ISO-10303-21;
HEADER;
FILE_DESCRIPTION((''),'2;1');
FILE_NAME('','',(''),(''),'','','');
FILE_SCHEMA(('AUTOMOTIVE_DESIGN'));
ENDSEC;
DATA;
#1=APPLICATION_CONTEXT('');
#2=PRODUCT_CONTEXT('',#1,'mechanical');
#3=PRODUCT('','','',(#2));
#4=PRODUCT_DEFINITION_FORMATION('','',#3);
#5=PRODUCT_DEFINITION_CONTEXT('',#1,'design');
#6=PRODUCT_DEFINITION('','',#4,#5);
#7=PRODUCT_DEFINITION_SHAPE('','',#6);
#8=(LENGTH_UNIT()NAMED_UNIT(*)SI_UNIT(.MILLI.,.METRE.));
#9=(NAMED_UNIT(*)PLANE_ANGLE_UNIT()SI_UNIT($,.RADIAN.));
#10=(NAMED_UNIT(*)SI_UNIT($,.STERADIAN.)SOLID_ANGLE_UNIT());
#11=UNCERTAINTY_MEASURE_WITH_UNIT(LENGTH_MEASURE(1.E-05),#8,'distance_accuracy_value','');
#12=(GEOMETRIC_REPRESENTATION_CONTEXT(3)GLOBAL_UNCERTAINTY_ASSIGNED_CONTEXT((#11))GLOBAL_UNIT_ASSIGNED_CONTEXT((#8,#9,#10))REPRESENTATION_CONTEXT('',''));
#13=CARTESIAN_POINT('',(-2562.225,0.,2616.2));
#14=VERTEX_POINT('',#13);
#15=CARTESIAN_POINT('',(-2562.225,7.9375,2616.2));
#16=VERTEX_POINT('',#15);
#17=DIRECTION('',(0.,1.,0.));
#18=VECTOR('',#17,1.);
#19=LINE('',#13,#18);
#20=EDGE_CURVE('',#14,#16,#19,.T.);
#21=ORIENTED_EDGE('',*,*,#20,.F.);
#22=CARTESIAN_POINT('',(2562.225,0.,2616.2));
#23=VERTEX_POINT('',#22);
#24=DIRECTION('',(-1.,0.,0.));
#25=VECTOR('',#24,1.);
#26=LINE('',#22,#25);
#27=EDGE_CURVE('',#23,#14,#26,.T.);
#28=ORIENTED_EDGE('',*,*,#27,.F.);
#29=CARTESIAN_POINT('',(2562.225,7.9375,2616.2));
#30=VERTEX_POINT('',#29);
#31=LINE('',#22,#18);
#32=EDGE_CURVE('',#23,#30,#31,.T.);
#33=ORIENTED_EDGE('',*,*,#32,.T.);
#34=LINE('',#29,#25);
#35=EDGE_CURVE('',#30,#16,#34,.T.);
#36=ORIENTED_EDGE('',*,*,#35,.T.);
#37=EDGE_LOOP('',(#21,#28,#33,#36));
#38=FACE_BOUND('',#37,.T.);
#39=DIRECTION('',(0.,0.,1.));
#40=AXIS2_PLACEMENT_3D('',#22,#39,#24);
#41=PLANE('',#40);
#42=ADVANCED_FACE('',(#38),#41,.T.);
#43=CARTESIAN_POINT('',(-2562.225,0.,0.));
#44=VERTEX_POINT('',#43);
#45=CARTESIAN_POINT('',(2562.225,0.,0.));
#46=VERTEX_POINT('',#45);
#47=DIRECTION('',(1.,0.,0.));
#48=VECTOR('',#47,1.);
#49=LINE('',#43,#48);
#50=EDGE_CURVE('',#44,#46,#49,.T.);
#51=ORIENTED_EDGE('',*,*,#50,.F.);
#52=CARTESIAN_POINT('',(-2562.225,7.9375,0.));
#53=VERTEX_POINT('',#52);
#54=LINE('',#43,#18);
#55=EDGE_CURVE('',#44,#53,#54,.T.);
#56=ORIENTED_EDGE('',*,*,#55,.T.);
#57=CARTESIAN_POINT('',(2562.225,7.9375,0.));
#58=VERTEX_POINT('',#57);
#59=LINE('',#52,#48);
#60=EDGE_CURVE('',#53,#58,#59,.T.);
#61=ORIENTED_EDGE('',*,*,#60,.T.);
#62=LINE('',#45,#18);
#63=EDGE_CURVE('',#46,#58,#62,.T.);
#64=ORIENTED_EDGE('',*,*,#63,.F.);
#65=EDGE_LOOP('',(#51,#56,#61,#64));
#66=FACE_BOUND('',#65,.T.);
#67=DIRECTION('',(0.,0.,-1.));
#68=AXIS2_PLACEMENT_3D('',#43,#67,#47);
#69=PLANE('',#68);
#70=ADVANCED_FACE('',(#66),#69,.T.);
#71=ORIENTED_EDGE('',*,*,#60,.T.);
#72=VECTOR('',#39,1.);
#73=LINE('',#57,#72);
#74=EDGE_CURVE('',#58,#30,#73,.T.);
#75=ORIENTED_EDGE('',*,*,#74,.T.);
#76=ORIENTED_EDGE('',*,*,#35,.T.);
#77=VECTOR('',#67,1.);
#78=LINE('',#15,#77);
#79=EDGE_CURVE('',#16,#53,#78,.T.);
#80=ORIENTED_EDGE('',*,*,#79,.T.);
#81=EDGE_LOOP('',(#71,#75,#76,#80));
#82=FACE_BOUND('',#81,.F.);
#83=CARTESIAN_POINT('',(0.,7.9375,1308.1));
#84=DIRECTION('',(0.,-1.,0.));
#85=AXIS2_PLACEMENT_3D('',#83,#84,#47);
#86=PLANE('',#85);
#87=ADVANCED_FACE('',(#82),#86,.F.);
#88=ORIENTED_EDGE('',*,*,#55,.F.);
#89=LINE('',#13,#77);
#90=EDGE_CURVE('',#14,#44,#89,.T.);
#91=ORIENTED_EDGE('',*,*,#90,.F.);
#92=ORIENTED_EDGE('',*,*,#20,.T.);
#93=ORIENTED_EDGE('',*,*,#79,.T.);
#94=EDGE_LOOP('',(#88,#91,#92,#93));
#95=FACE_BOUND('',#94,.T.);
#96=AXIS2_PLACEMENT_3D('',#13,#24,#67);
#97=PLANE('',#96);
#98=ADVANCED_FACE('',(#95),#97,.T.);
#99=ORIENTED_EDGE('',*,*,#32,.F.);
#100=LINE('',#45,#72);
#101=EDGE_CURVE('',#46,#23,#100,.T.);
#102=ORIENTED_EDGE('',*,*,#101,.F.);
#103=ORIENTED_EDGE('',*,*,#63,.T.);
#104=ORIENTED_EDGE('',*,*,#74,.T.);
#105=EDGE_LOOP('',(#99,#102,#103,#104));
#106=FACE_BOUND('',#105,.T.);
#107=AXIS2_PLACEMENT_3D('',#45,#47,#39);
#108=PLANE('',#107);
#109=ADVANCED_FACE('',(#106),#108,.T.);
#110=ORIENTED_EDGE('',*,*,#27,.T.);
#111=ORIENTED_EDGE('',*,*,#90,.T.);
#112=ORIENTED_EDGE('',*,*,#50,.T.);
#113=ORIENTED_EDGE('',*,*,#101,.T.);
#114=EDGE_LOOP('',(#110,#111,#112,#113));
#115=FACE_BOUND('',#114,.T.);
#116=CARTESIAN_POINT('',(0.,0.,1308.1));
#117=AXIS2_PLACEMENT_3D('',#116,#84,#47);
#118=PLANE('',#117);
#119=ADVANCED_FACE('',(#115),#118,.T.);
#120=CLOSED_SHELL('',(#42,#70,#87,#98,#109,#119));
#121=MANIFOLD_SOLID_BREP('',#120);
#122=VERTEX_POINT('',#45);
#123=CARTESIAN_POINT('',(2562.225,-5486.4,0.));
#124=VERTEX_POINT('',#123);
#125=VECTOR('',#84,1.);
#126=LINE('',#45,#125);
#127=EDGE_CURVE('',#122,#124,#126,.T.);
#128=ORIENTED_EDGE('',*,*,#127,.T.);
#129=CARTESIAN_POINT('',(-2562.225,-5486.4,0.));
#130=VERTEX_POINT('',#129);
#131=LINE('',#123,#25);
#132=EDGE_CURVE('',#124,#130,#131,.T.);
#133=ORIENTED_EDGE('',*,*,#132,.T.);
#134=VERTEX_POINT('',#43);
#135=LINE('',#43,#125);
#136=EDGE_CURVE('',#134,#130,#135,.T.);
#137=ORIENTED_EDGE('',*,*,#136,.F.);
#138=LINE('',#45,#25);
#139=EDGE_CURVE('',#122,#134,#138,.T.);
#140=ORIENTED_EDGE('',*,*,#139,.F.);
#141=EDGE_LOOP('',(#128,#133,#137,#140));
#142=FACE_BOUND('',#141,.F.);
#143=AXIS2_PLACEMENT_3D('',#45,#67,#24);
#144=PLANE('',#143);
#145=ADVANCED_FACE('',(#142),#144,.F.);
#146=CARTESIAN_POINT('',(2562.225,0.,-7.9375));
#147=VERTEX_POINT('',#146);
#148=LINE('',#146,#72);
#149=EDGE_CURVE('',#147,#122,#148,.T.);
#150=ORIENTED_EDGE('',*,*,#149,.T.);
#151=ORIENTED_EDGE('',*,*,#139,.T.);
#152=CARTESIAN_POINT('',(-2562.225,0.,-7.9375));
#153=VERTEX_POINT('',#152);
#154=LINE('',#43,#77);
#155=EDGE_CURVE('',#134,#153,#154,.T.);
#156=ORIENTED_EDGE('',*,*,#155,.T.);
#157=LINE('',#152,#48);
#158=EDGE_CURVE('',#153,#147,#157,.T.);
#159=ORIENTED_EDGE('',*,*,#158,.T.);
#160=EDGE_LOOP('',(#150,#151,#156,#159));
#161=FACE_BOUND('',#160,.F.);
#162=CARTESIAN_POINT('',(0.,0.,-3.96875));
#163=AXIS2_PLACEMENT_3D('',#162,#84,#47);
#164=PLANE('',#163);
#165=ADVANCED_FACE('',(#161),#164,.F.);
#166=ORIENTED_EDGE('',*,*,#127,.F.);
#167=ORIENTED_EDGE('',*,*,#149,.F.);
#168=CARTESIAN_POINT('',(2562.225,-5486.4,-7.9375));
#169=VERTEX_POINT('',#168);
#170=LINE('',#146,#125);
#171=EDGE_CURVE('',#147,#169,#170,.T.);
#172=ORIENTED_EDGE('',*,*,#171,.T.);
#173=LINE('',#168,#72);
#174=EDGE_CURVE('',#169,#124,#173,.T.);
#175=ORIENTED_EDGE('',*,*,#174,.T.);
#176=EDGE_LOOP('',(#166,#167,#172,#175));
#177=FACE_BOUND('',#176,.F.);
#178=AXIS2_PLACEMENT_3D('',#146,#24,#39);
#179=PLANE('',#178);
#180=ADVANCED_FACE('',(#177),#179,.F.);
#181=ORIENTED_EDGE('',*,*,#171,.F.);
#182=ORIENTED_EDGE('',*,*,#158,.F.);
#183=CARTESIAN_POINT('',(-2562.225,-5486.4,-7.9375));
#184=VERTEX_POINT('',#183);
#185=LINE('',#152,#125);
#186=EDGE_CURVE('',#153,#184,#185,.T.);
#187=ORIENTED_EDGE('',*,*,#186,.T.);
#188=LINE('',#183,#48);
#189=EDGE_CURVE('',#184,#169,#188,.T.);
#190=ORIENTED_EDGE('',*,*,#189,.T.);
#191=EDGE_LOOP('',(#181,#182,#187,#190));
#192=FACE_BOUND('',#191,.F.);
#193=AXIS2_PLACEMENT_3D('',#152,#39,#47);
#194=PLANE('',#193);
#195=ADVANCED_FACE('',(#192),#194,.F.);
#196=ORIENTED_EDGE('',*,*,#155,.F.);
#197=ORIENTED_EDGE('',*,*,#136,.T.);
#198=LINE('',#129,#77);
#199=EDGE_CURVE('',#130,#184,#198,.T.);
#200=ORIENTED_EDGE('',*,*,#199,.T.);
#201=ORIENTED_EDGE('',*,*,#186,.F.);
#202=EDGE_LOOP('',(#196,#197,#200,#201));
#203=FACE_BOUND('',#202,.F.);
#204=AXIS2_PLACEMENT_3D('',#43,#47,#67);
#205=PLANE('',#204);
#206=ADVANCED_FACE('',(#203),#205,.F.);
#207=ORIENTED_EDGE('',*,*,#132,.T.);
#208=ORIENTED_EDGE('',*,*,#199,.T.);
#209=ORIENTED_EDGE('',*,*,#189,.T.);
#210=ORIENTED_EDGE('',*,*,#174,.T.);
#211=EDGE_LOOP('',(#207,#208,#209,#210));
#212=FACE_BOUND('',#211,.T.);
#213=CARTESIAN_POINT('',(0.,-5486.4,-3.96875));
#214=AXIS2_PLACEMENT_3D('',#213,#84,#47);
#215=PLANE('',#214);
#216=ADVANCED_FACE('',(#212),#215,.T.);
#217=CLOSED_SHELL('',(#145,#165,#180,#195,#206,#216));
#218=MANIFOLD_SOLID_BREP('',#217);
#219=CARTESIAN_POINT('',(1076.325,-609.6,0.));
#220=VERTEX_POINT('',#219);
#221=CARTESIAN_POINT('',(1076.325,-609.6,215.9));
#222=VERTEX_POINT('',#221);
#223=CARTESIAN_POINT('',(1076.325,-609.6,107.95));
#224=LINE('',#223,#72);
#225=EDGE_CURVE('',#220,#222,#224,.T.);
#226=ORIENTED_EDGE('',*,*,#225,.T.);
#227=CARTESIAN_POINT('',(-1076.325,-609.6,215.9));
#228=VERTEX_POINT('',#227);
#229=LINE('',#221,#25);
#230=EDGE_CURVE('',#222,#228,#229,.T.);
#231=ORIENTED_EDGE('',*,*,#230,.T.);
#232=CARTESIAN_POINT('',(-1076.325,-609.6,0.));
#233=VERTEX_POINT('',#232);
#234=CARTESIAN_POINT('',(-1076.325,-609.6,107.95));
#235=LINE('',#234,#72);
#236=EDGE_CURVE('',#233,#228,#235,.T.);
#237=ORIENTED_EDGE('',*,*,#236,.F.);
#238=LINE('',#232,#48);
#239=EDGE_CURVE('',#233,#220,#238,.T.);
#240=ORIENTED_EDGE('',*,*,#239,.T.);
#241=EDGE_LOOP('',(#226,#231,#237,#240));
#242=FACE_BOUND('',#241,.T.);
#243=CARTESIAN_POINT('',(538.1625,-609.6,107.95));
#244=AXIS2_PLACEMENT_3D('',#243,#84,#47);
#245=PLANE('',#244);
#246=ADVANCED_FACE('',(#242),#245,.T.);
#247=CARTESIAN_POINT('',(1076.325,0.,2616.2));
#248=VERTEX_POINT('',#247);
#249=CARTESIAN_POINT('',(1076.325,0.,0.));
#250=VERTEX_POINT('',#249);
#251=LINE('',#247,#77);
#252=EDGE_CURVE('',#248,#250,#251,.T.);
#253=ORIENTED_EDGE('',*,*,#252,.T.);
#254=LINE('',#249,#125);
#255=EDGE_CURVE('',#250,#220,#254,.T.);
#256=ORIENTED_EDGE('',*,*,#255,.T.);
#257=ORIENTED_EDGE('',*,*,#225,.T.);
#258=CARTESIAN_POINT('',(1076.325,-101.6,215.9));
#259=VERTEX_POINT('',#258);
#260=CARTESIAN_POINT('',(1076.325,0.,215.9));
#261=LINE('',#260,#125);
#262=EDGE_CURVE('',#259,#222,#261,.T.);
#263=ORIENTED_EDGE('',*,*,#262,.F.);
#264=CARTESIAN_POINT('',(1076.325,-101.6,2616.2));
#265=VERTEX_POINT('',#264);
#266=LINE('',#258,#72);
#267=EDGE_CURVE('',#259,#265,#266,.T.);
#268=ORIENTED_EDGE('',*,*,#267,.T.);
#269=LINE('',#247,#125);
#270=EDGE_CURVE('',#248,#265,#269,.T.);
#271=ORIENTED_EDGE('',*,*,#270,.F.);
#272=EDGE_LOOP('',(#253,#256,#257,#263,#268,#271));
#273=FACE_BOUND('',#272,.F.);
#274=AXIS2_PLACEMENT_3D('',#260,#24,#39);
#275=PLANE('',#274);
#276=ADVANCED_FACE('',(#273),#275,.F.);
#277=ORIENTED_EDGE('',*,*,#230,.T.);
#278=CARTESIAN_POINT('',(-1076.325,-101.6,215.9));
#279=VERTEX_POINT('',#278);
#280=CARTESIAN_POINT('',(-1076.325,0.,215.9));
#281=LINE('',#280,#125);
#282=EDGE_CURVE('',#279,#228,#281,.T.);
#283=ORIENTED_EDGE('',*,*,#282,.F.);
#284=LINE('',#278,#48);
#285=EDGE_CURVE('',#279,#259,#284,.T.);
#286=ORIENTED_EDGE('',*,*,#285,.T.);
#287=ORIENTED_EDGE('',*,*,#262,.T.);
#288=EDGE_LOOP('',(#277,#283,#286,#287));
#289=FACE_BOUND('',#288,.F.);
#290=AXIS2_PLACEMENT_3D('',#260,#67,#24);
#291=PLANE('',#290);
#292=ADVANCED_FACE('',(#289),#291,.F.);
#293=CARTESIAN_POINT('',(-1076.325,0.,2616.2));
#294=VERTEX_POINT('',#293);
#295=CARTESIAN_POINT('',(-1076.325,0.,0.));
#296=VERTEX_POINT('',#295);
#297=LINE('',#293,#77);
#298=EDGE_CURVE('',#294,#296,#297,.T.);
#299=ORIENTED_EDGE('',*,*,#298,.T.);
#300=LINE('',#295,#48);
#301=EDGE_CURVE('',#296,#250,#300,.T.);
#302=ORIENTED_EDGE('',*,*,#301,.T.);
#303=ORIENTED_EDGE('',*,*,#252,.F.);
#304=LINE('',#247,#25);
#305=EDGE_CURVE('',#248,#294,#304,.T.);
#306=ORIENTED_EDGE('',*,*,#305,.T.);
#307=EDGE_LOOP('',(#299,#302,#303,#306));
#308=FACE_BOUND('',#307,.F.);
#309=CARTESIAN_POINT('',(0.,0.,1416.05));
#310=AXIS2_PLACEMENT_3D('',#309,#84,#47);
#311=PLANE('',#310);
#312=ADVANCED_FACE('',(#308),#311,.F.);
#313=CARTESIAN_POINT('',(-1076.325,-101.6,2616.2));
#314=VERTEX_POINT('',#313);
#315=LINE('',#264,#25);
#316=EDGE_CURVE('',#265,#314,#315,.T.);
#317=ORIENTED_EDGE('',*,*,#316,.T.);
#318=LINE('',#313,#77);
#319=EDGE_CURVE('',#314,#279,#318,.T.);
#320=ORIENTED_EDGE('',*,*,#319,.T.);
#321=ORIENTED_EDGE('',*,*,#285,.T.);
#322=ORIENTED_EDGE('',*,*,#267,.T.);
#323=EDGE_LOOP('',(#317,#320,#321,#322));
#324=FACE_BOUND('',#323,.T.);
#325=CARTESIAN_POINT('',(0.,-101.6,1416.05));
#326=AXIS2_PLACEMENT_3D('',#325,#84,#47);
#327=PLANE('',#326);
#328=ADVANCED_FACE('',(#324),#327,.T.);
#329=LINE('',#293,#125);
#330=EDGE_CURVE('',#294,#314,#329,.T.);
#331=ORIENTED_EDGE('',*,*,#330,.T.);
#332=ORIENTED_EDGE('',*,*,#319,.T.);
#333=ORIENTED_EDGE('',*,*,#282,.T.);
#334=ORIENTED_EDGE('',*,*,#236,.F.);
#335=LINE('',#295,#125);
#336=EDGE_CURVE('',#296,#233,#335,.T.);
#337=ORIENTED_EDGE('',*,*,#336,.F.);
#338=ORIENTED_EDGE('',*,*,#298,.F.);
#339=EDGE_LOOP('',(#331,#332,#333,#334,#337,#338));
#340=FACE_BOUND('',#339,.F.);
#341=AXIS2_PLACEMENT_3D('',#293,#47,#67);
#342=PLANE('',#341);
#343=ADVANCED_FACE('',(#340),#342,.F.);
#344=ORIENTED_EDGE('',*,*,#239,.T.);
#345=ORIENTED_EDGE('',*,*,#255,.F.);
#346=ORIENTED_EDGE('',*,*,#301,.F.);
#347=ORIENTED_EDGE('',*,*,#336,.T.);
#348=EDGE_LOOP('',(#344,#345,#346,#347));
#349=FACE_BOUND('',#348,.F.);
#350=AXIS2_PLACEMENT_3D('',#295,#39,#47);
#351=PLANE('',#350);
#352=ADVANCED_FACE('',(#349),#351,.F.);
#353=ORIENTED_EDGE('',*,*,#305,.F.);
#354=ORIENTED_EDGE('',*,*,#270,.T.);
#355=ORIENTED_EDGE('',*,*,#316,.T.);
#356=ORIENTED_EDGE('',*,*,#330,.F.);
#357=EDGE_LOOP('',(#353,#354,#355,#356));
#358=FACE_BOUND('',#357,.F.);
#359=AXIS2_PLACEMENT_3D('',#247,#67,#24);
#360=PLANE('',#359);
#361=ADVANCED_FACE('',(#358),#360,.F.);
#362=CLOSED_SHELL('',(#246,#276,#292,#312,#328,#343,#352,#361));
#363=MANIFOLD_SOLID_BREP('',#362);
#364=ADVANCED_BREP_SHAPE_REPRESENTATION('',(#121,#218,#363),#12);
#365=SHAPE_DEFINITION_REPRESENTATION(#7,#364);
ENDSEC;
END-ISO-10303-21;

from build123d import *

# Parameters (mm, degrees)
F1_DEPTH = 5486.4
F0_W     = 1076.325
F0_H     = 215.9
F2_DEPTH = 609.6
F3_DEPTH = 101.6
F5_DEPTH = 7.9375


# Not quite as in the source:
# - a length typed as a fraction of an inch, garbled in the dataset ("3 / 203.2 mm" for 3/8 in), is restored


with BuildPart() as f1:
    # F0 (on Front) → F1 (new body)
    with BuildSketch(Plane.XZ):
        Polygon((-2562.225, 0), (-2562.225, -7.9375), (2562.225, -7.9375), (2562.225, 0), (1076.325, 0), (0, 0), (-1076.325, 0), align=None)
    extrude(amount=F1_DEPTH)


with BuildPart() as f2:
    # F0 (on Front) → F2 (new body)
    with BuildSketch(Plane.XZ):
        with Locations((538.1625, 107.95)):
            Rectangle(F0_W, F0_H)
        with Locations((-538.1625, 107.95)):
            Rectangle(F0_W, F0_H)
    extrude(amount=F2_DEPTH)

    # F0 (on Front) → F3 (join)
    with BuildSketch(Plane.XZ):
        Polygon((-1076.325, 2616.2), (-1076.325, 215.9), (0, 215.9), (1076.325, 215.9), (1076.325, 2616.2), align=None)
    extrude(amount=F3_DEPTH)


with BuildPart() as f5:
    # F4 (on Front) → F5 (new body)
    with BuildSketch(Plane.XZ):
        Polygon((-2562.225, 2616.2), (-2562.225, 0), (2562.225, 0), (2562.225, 2616.2), (1076.325, 2616.2), (-1076.325, 2616.2), align=None)
    extrude(amount=-F5_DEPTH)


solid = Compound([f1.part, f2.part, f5.part])
